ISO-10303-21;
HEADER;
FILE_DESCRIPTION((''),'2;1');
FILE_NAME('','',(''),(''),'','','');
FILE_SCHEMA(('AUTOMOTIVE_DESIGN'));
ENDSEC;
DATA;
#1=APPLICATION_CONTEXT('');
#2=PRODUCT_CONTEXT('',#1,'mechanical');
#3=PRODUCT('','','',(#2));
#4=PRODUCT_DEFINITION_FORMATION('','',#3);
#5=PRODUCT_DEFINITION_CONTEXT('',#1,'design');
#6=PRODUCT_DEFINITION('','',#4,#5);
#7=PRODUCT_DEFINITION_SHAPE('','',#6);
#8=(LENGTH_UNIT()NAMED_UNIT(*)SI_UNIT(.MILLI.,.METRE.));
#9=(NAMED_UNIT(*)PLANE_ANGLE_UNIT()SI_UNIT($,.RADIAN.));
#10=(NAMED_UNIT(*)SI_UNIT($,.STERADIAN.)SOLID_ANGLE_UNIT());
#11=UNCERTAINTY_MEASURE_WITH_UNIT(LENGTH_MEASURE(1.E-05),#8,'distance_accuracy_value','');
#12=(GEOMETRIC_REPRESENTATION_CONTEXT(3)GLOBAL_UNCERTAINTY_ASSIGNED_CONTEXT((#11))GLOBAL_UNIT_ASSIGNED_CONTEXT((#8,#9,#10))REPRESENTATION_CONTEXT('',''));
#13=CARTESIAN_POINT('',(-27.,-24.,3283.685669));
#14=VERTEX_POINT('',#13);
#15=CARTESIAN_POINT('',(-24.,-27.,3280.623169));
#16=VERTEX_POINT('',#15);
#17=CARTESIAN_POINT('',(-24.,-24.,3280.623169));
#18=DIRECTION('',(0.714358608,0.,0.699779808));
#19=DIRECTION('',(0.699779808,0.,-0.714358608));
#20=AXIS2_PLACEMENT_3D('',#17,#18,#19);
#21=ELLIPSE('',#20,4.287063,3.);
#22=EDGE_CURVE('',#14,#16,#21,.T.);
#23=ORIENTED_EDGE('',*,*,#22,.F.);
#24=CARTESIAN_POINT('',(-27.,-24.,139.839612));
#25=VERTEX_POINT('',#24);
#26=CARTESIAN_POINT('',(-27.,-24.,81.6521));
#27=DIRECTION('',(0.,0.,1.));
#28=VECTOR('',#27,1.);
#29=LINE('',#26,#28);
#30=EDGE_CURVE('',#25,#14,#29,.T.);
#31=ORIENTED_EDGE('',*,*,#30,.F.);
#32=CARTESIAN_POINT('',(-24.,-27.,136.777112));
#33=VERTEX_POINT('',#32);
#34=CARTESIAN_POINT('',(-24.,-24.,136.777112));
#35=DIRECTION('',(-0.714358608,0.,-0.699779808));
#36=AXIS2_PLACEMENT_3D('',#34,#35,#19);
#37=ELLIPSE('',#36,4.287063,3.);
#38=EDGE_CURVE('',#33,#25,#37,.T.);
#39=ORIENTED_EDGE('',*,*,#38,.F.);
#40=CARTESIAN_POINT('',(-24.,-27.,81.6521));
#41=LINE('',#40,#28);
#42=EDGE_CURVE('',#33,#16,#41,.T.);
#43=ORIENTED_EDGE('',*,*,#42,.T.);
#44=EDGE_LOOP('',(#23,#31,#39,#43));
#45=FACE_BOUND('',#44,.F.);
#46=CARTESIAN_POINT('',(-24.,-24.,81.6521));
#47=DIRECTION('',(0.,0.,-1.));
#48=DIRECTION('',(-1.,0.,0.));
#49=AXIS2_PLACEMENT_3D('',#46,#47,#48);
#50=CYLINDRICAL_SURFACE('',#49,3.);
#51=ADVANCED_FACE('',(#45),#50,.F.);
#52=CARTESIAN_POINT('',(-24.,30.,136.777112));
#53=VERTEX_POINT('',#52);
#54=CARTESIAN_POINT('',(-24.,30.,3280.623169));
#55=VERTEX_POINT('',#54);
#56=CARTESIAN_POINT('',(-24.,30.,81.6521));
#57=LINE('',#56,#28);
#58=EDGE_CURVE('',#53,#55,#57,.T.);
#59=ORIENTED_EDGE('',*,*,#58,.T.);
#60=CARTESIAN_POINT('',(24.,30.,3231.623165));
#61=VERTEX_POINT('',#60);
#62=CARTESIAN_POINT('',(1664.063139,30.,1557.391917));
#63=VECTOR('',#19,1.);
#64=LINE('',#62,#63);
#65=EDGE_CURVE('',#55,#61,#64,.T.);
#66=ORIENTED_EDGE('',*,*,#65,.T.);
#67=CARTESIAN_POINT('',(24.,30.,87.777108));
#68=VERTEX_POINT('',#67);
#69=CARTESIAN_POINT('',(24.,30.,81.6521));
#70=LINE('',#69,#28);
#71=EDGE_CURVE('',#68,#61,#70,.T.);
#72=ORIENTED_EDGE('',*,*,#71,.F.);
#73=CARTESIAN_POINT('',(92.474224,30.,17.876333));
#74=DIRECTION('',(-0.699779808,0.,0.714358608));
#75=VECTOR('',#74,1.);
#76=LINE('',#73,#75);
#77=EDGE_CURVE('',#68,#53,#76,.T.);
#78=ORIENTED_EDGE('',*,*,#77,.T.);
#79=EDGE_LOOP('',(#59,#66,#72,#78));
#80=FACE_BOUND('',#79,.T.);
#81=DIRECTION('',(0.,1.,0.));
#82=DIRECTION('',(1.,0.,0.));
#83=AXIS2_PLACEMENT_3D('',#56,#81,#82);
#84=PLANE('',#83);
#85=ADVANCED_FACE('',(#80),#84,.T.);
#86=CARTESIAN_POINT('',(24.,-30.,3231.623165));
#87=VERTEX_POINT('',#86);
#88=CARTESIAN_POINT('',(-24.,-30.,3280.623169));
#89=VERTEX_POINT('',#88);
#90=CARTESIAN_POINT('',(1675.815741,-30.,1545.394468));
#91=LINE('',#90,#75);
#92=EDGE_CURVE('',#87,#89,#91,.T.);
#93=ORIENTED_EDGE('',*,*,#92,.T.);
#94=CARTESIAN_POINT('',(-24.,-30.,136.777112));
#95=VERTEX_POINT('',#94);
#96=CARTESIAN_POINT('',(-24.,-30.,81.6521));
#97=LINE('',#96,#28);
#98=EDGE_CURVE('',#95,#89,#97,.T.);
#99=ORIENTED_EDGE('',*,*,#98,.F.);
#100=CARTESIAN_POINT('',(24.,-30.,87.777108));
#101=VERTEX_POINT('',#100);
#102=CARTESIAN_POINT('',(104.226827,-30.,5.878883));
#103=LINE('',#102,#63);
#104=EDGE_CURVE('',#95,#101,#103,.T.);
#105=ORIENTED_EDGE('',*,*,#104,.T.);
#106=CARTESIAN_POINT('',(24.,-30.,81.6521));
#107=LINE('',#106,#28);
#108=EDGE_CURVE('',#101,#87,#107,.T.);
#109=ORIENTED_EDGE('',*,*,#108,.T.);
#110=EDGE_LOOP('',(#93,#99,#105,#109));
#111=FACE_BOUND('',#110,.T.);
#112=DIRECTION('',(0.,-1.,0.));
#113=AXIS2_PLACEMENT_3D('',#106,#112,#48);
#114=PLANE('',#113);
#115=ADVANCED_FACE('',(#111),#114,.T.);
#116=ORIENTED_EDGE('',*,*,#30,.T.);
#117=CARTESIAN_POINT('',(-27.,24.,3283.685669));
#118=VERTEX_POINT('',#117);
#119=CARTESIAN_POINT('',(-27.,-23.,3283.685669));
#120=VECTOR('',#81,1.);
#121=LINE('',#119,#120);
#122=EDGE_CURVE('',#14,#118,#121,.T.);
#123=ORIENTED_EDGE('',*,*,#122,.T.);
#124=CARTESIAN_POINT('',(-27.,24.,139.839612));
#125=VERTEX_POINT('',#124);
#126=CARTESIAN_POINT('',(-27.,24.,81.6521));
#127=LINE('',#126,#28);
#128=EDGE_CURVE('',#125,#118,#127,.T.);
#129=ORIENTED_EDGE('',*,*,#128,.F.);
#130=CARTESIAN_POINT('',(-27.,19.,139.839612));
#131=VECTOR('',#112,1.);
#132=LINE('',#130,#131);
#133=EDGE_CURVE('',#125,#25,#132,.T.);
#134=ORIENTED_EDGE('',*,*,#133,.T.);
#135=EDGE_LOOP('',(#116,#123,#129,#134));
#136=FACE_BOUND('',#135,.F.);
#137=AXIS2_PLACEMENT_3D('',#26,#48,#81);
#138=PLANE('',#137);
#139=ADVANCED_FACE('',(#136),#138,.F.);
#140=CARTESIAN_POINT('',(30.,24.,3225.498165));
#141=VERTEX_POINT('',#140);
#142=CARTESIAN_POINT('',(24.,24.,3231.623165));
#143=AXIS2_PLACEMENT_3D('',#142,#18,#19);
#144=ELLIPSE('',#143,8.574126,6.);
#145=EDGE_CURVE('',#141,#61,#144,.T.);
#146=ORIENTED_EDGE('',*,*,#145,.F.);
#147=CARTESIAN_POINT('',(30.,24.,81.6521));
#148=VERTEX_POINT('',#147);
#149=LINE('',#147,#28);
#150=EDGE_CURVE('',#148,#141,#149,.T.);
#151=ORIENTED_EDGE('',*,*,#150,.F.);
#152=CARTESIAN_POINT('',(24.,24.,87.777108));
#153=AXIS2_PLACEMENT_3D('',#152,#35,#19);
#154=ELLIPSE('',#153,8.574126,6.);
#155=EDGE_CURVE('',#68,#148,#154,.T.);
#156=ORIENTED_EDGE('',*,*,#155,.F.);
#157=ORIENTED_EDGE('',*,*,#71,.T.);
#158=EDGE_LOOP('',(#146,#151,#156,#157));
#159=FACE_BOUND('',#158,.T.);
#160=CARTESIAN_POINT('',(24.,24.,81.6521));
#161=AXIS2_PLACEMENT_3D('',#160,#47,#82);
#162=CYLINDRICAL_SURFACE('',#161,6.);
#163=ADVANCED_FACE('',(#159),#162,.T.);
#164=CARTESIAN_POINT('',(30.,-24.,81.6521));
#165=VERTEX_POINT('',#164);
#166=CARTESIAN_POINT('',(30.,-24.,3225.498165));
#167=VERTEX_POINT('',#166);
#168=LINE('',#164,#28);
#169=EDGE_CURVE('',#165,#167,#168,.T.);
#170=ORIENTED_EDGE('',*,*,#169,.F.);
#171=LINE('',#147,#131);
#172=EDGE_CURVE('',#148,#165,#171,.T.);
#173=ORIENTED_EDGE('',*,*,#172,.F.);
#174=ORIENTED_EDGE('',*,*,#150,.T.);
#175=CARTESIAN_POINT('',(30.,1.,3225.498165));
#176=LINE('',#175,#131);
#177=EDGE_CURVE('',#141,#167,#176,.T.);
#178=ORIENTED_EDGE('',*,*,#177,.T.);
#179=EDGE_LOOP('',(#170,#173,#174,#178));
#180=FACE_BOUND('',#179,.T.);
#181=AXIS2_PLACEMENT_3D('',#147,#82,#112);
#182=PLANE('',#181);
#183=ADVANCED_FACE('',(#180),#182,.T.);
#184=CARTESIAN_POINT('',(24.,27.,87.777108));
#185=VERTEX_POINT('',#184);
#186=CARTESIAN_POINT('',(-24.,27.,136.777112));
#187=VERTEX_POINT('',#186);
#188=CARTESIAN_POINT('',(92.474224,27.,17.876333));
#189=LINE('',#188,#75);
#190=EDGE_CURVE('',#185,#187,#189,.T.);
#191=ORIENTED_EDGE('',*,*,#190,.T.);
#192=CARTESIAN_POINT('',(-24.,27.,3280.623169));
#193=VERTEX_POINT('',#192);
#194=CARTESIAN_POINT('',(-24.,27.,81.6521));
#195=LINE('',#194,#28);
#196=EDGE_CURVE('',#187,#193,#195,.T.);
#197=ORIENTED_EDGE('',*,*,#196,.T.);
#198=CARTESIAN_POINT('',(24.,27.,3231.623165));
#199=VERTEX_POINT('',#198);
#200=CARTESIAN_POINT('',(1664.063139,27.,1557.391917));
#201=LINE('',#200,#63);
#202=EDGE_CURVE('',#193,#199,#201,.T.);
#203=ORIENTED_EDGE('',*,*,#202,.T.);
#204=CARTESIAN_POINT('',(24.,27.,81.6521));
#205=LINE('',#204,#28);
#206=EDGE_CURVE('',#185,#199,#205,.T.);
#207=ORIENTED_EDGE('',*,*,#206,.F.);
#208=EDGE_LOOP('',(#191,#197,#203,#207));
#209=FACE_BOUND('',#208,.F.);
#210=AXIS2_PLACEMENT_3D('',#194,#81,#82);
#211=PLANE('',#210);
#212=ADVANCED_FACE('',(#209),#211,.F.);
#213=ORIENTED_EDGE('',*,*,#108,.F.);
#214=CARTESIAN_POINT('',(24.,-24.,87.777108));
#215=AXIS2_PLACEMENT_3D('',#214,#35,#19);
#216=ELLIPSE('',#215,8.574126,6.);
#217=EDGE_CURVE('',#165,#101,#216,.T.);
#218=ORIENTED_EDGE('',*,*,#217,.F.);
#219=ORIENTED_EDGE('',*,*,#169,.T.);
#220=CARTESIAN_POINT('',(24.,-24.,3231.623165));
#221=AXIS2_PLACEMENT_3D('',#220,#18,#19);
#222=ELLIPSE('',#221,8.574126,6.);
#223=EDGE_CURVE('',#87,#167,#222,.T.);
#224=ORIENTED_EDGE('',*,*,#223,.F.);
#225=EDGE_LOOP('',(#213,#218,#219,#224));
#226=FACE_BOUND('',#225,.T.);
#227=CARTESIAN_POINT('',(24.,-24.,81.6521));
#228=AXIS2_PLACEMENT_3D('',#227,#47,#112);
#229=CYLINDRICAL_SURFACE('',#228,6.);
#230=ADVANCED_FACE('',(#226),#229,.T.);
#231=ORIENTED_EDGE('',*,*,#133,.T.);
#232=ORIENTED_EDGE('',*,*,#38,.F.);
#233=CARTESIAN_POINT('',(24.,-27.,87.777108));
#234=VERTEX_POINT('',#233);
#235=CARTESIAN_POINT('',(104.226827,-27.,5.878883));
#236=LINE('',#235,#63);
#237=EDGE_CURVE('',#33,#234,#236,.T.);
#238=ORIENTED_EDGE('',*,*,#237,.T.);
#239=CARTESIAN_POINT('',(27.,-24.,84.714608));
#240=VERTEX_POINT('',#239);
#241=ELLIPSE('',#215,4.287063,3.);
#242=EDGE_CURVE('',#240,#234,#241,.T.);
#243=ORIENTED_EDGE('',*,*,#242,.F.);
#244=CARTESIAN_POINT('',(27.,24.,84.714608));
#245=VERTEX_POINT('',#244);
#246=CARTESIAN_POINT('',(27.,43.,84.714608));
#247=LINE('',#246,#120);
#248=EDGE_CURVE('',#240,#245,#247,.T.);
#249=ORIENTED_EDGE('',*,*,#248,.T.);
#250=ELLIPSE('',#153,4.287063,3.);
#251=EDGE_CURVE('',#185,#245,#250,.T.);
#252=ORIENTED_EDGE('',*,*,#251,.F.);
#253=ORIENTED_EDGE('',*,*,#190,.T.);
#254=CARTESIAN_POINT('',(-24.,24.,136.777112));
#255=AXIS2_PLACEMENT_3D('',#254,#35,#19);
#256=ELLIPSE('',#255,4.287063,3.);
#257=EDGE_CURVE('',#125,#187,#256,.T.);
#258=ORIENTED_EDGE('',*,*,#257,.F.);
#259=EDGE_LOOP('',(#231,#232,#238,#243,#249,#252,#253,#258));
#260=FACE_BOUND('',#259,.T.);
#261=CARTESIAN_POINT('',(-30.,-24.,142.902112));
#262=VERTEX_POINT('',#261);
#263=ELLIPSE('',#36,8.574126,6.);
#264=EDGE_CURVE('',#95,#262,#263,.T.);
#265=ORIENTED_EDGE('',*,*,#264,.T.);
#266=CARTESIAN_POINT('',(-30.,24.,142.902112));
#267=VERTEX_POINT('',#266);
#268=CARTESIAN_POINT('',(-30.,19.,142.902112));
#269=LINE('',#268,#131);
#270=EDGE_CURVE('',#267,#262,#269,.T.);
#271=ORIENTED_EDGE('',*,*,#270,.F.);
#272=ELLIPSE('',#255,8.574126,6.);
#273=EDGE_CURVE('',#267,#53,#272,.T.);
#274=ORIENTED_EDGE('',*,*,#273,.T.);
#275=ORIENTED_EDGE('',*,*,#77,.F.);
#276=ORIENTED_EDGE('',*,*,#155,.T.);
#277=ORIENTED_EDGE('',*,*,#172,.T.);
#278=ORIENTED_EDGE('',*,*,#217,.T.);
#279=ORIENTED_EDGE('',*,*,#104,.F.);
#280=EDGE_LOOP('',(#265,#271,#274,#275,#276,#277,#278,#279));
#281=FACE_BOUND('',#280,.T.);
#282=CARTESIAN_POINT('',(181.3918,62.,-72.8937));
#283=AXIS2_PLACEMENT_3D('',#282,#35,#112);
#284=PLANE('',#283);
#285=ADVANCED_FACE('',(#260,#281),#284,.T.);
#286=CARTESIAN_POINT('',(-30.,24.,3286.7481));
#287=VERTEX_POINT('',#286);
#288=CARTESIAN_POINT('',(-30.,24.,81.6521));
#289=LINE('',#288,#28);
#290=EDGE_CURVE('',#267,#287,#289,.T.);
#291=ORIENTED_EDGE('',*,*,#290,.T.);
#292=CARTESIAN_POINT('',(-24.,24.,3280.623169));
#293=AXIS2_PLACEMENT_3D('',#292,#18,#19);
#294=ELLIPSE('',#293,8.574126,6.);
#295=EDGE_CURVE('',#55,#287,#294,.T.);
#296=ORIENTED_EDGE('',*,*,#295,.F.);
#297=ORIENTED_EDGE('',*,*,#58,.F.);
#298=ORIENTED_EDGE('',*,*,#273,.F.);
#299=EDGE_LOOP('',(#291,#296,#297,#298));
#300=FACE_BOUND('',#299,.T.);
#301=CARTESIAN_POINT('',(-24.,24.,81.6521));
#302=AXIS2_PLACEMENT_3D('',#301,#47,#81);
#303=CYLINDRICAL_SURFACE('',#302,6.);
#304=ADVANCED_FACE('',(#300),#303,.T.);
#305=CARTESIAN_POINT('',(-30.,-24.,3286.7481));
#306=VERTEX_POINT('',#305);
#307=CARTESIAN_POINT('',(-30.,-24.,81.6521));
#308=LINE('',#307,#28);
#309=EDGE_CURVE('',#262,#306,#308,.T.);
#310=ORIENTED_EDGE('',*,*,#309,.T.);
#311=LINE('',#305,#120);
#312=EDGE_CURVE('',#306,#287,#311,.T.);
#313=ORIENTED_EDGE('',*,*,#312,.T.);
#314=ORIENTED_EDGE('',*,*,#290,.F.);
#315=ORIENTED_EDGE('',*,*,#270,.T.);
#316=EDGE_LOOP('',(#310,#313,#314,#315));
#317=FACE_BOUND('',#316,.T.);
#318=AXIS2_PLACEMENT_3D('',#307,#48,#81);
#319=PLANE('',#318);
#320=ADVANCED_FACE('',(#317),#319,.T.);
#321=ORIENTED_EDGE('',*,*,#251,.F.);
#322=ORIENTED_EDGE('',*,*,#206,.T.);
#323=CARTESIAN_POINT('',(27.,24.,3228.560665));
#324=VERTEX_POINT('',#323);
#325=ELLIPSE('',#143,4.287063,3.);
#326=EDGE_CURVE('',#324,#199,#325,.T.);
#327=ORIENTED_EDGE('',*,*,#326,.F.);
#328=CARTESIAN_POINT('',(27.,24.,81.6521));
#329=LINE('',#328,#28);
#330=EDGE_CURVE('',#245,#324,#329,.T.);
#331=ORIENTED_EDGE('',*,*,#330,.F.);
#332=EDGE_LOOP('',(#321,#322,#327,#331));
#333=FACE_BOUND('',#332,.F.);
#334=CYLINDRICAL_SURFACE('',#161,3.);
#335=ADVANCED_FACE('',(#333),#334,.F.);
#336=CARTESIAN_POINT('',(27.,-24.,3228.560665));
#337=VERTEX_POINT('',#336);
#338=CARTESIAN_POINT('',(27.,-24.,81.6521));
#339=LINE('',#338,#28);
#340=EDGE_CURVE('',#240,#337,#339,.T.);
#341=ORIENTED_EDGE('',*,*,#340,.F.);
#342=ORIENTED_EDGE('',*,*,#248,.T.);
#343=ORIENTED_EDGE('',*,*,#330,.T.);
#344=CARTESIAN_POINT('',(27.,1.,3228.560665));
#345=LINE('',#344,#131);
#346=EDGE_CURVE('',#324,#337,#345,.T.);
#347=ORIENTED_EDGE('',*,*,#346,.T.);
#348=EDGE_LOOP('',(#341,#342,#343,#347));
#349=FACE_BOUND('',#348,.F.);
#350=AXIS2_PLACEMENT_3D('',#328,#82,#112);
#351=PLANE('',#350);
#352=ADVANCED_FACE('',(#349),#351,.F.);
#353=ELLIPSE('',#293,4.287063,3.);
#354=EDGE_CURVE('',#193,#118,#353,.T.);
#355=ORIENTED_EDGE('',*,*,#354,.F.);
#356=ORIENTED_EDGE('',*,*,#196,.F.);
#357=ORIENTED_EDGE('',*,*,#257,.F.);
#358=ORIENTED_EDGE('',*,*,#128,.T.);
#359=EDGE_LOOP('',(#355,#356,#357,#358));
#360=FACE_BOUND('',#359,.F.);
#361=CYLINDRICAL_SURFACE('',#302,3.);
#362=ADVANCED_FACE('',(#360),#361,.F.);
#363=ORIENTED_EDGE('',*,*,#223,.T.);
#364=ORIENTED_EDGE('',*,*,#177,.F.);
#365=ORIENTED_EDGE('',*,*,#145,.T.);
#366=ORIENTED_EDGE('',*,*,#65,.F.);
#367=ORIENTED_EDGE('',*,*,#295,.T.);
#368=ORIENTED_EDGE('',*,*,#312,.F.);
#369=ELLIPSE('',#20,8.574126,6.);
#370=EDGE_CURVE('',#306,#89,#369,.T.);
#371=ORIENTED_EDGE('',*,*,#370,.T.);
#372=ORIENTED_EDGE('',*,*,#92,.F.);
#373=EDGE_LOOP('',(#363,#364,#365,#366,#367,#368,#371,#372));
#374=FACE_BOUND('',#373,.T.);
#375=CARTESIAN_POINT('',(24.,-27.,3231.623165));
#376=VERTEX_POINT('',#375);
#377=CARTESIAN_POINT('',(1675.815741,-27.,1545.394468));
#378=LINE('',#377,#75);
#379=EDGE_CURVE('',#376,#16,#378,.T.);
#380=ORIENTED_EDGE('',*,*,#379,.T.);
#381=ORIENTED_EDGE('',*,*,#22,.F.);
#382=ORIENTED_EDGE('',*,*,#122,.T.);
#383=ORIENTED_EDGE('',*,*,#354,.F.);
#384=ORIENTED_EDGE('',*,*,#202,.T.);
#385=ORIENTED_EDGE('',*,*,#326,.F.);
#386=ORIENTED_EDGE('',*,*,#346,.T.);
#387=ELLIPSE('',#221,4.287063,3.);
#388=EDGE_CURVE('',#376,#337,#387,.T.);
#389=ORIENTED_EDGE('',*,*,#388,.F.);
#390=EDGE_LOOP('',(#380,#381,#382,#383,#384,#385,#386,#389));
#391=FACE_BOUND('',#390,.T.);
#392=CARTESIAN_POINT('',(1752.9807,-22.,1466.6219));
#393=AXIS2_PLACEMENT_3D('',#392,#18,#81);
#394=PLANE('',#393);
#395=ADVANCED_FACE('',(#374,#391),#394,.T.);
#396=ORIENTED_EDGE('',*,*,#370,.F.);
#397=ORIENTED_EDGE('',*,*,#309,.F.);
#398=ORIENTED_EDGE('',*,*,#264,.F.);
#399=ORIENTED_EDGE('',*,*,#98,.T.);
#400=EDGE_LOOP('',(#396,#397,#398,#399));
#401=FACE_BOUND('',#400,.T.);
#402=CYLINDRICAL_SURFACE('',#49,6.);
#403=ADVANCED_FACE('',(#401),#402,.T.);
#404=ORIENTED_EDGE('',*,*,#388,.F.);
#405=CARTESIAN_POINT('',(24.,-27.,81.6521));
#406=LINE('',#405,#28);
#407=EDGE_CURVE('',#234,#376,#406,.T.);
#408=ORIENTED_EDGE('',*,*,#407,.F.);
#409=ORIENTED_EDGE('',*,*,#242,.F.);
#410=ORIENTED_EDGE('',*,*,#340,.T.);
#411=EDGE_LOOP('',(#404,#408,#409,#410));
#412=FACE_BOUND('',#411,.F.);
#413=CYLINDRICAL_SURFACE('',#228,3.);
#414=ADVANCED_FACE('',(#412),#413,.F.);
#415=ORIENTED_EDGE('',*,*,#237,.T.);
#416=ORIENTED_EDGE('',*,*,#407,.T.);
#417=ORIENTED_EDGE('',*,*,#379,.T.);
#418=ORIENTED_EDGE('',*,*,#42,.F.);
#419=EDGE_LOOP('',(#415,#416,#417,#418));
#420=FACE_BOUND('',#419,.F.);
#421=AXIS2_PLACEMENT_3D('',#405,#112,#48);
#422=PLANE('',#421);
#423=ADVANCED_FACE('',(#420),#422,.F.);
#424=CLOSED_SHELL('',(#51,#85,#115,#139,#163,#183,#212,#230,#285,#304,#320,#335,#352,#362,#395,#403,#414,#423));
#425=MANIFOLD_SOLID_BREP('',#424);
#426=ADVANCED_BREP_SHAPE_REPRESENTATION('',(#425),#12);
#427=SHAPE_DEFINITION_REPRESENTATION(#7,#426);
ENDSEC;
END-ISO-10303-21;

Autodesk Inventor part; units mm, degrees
ref_plane "Start Plane" through (0, 0, 81.6521) normal (0, 0, 1) x (1, 0, 0)
ref_plane "End Plane" through (0, 0, 3286.748) normal (0, 0, 1) x (1, 0, 0)
sketch "Sketch" plane through (0, 0, 0) normal (0, 0, 1) x (1, 0, 0)
  line L0 (-30, -24) -> (-30, 24)
  line L1 (-24, 30) -> (24, 30)
  line L2 (30, 24) -> (30, -24)
  line L3 (24, -30) -> (-24, -30)
  arc A0 (-30, -24) -> (-24, -30) centre (-24, -24) ccw
  arc A1 (30, 24) -> (24, 30) centre (24, 24) ccw
  arc A2 (-24, 30) -> (-30, 24) centre (-24, 24) ccw
  arc A3 (24, -30) -> (30, -24) centre (24, -24) ccw
  arc A4 (-24, 27) -> (-27, 24) centre (-24, 24) ccw
  line L4 (-24, 27) -> (24, 27)
  arc A5 (27, 24) -> (24, 27) centre (24, 24) ccw
  line L5 (27, 24) -> (27, -24)
  arc A6 (24, -27) -> (27, -24) centre (24, -24) ccw
  line L6 (24, -27) -> (-24, -27)
  arc A7 (-27, -24) -> (-24, -27) centre (-24, -24) ccw
  line L7 (-27, -24) -> (-27, 24)
  line L8 (0, 43.7397) -> (0, -43.7397) construction
  line L9 (-43.7397, 0) -> (43.7397, 0) construction
  dimension "d7" = 6
  dimension "d9" = 60
  dimension "d11" = 60
  dimension "d12" = 3
  dimension "d15" = 30
  dimension "d16" = 30
extrude "Body" add sketch "Sketch" along normal up to surface (3205.096 mm away) from surface at 81.6521
sketch "Sketch3" plane through (0, 0, 0) normal (0, 0, 1) x (1, 0, 0)
  line L0 (0, 0) -> (10, 0)
ref_plane "Work Plane3" through (0, 0, 0) normal (0, -1, 0) x (1, 0, 0)
ref_plane "Work Plane4" through (1752.9807, -22, 1466.6219) normal (0.7143586, 0, 0.6997798) x (0.6997798, 0, -0.7143586)
split "Split1" plane through (1752.9807, -22, 1466.6219) removes the side toward (0.7143586, 0, 0.6997798)
ref_plane "Work Plane5" through (181.3918, 62, -72.8937) normal (-0.7143586, 0, -0.6997798) x (-0.6997798, 0, 0.7143586)
split "Split2" plane through (181.3918, 62, -72.8937) removes the side toward (-0.7143586, 0, -0.6997798)
sketch "Sketch4" plane through (0, 0, 0) normal (0, -1, 0) x (1, 0, 0)
  line L0 (-2, 81.6521) -> (12, 81.6521) projected
  line L1 (-2, 3286.748) -> (12, 3286.748) projected
  dimension "d18" = 3205.0959
equation "\"d7\" = G_IR"
equation "\"d9\" = G_W"
equation "\"d11\" = G_H"
equation "\"d12\" = G_T"
equation "\"d15\" = 0.5 * d9"
equation "\"d16\" = 0.5 * d11"
equation "\"d3\" = G_L"
equation "\"G_W\" = 60"
equation "\"G_H\" = 60"
equation "\"G_T\" = 3"
equation "\"G_IR\" = 6"
equation "\"G_L\" = d18"
equation "\"G_OFFSET_START\" = -81.65209"
equation "\"G_OFFSET_END\" = -142.90209"
equation "\"d13\" = -G_OFFSET_START"
equation "\"d14\" = G_OFFSET_END + B_L"
equation "\"B_L\" = 3429.65013"
properties part number "ISO 10799-2 - 60x60x3 - 3205,1" material "Steel, Mild"
